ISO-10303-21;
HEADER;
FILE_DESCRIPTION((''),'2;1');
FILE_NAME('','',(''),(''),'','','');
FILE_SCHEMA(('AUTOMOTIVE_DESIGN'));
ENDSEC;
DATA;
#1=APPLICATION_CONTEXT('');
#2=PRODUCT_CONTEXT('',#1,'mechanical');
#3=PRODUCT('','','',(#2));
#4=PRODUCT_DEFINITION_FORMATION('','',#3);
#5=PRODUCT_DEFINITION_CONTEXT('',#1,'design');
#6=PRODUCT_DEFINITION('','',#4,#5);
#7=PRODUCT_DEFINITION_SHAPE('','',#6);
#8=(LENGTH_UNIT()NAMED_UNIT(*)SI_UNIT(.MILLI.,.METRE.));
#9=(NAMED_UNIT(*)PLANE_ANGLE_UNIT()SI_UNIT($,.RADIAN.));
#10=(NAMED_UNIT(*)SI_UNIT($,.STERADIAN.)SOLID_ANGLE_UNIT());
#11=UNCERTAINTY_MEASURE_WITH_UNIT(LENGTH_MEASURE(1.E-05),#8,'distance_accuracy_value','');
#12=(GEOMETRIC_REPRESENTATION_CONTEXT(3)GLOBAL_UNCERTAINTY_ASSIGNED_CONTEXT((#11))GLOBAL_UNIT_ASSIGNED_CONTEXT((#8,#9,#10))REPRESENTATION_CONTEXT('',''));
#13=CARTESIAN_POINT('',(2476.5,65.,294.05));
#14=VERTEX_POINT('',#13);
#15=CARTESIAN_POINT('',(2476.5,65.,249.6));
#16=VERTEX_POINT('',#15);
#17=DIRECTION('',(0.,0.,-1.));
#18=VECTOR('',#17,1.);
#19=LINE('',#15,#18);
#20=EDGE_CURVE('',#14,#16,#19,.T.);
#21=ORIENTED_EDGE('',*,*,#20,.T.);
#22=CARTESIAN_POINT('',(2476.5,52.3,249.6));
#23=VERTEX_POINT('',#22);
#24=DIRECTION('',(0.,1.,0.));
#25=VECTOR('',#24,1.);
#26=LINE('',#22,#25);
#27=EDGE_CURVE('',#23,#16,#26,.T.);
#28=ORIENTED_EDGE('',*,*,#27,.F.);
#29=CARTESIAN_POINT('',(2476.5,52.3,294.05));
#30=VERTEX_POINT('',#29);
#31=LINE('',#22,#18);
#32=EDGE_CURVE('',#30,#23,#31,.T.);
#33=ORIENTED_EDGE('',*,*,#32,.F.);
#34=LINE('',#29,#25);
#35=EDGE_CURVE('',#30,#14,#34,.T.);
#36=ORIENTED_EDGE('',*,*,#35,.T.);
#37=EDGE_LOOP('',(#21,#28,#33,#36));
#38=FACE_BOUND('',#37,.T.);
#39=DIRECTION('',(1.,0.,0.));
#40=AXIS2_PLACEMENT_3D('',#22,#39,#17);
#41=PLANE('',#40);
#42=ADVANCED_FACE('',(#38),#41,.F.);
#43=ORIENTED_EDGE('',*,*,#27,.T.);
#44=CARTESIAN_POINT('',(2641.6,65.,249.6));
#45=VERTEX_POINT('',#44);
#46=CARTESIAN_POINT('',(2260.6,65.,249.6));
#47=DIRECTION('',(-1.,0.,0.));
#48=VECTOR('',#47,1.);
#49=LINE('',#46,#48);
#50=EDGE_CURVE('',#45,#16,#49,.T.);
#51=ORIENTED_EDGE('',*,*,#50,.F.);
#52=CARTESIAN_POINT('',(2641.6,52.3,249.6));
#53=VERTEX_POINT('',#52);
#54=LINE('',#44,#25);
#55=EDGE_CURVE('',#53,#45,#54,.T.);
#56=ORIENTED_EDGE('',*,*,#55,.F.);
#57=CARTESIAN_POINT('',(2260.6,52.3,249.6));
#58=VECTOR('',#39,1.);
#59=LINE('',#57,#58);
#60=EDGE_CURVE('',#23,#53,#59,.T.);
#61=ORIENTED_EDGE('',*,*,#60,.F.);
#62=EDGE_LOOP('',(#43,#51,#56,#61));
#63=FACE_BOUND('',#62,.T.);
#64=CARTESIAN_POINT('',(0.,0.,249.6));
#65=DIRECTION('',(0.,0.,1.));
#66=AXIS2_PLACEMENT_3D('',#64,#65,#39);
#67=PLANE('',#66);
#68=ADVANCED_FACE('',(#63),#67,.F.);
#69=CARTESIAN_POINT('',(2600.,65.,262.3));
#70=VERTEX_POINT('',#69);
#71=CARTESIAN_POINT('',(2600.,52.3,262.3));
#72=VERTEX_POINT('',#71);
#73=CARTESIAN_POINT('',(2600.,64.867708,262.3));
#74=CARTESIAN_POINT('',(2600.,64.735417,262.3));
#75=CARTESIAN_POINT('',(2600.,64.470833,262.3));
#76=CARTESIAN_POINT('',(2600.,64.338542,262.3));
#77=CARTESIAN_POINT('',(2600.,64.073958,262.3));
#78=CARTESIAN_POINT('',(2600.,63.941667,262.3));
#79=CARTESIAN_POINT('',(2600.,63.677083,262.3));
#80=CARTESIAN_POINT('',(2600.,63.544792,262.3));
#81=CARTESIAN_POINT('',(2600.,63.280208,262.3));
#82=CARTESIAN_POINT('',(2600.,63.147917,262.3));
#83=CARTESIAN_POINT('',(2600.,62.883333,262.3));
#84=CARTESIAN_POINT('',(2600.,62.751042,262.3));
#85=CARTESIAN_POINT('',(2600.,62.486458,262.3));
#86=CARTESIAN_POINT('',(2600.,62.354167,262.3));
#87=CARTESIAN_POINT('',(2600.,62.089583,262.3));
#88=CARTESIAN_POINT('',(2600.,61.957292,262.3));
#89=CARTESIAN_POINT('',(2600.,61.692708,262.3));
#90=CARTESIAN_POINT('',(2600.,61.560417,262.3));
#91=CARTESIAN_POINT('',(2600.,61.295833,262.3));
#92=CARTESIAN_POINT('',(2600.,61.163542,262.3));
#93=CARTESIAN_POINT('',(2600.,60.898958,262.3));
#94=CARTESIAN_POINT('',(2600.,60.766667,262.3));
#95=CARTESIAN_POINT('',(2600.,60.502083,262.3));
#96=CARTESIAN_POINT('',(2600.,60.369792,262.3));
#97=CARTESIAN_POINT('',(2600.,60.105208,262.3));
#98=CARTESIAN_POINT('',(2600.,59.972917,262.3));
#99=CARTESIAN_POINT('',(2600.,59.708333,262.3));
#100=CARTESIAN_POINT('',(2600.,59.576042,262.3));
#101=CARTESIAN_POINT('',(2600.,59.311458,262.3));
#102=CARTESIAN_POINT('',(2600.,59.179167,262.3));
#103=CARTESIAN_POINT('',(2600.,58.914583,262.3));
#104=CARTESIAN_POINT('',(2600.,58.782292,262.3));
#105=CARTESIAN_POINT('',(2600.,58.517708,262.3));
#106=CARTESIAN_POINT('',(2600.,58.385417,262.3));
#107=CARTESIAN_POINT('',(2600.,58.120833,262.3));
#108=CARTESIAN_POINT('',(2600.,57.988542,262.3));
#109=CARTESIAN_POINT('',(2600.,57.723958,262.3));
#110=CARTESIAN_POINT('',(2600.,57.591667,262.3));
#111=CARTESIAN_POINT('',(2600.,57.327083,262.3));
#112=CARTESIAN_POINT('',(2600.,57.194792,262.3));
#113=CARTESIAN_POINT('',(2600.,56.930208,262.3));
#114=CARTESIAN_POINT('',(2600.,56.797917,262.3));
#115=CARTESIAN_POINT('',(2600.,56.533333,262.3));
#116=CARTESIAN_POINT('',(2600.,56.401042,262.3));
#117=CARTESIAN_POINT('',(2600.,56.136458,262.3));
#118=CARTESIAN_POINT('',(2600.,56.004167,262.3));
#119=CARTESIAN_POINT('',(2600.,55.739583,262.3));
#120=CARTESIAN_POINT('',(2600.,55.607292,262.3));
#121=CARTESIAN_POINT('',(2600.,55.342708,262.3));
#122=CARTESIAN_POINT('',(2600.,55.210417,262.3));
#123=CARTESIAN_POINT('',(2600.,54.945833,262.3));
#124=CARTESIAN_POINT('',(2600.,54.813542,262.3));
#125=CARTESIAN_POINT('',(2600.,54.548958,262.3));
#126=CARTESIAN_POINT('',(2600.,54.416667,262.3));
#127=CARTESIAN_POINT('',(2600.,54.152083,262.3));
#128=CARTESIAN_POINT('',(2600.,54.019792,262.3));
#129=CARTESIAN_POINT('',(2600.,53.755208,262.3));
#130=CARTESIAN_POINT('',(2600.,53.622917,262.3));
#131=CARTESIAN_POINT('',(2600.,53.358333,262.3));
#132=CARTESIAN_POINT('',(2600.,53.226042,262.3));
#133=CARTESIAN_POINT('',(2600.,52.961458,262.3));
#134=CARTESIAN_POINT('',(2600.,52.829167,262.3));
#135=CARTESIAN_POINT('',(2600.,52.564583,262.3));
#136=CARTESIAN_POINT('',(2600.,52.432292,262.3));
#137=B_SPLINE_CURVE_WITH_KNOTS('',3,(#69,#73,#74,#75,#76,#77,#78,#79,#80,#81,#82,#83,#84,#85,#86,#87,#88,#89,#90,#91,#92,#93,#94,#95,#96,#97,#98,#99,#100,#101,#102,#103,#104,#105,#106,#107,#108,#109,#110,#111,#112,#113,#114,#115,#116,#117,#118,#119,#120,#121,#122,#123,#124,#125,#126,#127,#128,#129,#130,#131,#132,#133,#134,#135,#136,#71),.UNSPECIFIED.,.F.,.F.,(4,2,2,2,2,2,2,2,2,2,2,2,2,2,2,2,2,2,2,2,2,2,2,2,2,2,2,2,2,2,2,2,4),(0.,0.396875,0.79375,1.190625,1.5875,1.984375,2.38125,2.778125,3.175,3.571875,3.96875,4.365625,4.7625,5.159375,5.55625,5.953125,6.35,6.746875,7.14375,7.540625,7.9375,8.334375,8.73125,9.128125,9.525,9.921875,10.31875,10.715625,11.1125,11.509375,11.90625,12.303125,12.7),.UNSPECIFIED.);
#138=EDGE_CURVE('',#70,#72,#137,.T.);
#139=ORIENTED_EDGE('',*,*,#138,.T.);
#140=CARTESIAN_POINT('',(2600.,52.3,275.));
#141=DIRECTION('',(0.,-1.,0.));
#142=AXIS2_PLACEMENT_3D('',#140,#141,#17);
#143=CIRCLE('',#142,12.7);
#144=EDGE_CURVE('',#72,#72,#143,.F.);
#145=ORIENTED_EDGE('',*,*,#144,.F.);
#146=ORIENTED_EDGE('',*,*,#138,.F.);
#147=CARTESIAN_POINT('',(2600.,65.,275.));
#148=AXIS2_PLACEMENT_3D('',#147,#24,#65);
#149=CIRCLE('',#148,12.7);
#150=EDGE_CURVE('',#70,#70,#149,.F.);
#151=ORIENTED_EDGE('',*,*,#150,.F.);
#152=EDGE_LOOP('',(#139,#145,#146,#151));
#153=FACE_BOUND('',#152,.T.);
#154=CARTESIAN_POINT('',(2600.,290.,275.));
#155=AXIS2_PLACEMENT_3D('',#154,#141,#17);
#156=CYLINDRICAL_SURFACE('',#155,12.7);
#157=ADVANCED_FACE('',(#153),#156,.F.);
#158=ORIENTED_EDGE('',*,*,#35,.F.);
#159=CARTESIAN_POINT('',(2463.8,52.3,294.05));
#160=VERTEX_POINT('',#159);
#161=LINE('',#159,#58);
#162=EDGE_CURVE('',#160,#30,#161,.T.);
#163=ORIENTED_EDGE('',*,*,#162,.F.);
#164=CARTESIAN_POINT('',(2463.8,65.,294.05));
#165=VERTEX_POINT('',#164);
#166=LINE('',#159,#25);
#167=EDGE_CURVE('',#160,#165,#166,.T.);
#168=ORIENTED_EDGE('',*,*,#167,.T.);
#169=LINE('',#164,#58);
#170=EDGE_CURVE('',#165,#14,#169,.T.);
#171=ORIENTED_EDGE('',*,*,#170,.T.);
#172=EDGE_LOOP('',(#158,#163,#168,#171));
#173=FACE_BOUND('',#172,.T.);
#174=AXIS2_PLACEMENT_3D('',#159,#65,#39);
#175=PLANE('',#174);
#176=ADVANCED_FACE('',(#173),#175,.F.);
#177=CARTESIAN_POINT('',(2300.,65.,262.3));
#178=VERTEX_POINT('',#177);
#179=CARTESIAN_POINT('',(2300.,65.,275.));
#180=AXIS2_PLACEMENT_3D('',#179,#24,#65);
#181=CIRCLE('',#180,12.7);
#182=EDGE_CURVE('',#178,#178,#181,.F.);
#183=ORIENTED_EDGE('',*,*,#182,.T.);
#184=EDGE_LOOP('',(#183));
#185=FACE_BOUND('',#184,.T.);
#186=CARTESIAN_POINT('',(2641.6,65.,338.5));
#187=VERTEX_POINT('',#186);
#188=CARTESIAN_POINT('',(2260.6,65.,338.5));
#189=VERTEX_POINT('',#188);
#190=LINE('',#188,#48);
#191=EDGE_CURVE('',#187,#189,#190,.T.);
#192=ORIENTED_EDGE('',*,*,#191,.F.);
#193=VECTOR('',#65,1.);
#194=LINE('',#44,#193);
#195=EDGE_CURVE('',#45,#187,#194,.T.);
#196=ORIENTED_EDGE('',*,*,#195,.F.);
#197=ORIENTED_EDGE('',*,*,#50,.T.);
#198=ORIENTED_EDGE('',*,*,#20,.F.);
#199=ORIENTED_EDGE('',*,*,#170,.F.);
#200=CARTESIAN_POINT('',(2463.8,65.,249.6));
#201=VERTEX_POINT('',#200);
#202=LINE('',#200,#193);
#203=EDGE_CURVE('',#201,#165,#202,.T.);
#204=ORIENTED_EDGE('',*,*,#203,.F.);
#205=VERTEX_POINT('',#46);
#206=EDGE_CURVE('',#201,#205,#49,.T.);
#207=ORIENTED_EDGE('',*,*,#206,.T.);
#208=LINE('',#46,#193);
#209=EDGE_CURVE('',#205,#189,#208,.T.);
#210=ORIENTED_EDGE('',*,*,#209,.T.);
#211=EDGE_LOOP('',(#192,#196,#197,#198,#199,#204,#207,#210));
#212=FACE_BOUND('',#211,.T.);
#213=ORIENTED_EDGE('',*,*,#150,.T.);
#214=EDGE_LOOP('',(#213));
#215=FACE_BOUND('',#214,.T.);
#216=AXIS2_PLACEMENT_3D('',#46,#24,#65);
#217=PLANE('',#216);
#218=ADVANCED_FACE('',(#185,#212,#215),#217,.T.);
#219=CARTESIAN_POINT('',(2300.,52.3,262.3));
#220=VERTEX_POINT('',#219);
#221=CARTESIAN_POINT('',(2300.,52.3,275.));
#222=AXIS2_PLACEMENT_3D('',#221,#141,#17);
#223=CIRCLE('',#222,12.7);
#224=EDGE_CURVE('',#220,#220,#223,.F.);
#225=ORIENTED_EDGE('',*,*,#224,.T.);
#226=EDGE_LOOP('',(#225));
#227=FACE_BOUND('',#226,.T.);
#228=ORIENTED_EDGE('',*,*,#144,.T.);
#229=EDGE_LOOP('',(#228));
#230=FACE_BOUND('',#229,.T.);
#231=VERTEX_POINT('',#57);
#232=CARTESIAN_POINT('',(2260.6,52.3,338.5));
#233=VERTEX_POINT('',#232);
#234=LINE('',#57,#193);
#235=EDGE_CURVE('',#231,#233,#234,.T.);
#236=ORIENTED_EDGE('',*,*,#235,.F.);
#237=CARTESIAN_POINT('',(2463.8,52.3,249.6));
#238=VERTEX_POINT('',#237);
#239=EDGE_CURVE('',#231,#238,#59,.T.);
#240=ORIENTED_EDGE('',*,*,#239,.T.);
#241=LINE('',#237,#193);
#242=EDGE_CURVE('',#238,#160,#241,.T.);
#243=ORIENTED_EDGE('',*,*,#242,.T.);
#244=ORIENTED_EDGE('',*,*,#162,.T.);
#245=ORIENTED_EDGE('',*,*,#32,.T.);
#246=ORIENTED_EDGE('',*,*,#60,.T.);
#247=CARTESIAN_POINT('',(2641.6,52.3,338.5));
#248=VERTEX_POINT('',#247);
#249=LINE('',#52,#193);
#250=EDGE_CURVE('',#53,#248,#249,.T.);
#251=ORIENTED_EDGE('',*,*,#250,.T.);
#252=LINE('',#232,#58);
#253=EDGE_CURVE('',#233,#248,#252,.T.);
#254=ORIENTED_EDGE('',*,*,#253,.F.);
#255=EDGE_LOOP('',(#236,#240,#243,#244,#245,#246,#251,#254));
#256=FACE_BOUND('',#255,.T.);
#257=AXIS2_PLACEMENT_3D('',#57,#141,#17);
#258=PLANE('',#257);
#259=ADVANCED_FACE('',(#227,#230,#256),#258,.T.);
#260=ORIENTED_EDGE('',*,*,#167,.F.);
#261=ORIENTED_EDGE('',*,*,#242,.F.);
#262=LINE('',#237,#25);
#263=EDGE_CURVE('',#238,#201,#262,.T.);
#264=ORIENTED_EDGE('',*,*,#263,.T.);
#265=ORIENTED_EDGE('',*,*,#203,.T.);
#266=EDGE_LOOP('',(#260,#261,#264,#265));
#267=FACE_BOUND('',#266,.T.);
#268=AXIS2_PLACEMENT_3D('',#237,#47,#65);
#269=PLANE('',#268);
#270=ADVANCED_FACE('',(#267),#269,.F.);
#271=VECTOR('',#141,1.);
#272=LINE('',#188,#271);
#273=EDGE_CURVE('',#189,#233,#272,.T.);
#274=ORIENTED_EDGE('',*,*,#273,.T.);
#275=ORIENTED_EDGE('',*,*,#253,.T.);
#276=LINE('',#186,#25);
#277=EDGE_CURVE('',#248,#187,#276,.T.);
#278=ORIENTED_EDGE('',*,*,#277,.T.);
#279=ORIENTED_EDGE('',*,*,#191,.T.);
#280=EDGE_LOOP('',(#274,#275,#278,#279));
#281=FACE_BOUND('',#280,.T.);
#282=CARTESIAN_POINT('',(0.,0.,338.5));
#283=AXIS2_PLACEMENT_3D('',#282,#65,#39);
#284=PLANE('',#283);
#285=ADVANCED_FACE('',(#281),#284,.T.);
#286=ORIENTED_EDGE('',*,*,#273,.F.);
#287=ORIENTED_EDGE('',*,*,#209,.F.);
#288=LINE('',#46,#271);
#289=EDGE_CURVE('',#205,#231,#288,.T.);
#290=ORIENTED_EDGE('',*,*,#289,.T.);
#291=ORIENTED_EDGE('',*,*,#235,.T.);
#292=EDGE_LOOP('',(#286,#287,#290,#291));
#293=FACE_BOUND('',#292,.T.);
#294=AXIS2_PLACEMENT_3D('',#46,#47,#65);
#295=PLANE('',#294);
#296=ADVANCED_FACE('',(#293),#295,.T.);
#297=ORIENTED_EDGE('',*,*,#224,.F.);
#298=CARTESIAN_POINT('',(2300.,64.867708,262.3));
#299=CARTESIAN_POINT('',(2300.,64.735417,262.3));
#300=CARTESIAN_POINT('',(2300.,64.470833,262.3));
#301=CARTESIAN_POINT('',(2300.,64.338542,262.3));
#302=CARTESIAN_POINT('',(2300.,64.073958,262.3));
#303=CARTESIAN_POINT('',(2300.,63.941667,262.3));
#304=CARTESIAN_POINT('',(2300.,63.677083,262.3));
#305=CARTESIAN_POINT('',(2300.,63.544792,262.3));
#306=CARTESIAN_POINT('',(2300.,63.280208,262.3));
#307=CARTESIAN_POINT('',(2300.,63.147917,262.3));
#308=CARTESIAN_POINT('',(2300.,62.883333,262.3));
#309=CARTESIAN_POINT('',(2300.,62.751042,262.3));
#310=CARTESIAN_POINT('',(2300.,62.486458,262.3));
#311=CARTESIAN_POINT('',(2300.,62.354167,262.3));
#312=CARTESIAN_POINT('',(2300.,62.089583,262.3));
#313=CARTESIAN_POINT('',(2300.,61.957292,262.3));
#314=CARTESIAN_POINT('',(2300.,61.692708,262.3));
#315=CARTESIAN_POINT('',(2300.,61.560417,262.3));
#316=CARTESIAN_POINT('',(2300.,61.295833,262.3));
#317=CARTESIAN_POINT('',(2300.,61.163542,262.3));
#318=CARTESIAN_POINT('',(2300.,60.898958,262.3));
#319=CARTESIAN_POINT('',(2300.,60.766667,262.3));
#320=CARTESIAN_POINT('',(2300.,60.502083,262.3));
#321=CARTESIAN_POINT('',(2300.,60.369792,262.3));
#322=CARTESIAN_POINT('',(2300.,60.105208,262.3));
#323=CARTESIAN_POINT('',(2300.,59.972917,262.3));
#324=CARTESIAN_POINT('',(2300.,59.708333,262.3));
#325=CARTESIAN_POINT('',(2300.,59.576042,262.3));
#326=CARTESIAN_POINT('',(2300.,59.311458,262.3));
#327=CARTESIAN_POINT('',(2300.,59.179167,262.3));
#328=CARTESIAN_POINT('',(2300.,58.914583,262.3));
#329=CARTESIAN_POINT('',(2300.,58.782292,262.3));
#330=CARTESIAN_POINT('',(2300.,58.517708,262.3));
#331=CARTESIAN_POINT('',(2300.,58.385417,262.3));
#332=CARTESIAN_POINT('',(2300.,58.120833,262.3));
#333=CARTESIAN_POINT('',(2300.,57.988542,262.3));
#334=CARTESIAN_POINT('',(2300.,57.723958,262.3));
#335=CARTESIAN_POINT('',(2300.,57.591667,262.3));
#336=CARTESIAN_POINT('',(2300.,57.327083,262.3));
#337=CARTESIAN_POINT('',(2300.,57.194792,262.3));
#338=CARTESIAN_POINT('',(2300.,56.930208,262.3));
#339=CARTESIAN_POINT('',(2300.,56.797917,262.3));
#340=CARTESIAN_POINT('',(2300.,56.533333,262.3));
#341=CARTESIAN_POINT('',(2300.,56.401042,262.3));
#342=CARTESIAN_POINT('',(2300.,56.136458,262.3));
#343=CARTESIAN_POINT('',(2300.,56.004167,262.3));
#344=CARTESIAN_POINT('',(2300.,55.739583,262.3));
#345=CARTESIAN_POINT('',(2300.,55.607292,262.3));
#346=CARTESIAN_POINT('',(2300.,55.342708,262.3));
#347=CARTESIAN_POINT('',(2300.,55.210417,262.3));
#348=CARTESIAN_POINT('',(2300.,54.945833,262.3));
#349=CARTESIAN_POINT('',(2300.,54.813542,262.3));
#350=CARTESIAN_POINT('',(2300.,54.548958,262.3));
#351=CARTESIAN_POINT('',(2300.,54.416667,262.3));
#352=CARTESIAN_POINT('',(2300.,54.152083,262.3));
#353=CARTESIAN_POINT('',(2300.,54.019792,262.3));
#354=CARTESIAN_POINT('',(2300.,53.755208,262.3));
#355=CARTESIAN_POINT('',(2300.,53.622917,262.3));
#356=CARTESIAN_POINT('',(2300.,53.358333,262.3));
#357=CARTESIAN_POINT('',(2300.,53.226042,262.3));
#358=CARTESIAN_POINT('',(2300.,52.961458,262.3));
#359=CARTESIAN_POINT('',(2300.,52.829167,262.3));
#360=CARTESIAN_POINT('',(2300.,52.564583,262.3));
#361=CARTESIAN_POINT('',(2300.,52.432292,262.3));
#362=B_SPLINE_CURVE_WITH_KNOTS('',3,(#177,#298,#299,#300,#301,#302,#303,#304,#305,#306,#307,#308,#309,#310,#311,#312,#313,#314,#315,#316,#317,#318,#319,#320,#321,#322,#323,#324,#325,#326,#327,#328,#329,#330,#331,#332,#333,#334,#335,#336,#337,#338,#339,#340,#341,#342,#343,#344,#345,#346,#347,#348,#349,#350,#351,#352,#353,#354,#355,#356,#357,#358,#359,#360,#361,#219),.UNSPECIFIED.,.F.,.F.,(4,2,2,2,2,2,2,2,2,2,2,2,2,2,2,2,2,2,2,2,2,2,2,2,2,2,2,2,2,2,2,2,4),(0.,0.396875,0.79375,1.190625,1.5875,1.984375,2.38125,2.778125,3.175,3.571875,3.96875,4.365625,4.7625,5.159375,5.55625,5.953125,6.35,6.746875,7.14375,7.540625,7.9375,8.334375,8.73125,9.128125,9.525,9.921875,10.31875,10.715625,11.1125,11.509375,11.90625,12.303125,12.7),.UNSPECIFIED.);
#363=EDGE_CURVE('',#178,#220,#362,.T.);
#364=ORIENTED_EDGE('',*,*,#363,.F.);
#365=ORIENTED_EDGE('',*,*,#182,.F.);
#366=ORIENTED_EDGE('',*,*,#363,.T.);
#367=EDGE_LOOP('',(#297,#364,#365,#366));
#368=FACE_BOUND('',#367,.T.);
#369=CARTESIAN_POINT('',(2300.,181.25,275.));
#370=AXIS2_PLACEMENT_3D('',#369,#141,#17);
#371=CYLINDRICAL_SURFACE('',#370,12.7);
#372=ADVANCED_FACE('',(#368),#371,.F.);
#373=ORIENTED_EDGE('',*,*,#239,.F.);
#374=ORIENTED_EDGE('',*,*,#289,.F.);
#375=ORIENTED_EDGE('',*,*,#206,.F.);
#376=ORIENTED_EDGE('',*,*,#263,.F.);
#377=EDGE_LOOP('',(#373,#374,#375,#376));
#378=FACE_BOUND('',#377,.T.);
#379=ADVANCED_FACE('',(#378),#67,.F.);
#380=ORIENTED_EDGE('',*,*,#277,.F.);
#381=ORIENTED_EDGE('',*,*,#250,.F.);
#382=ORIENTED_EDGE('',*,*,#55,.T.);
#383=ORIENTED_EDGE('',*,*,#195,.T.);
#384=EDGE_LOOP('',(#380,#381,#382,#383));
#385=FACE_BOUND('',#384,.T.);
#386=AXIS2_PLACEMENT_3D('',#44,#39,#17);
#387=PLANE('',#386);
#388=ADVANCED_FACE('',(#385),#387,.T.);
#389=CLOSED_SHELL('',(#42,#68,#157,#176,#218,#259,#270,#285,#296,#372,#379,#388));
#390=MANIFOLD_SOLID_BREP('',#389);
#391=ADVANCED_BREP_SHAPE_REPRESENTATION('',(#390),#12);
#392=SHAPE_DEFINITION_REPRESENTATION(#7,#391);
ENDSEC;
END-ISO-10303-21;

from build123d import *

# Parameters (mm, degrees)
BOSS_EXTRUDE1_DEPTH      = 50.8
BOSS_EXTRUDE1_DEPTH_BACK = 38.1
SKETCH1_W                = 381
SKETCH1_H                = 12.7
SKETCH3_W                = 12.7
SKETCH3_H                = 44.45
CUT_EXTRUDE1_DEPTH       = 2664.230012597
CAVITY1_START            = 52.3
CAVITY1_OUTLINE_R        = 12.7
CAVITY1_DEPTH            = 12.7


# Read off the part's stored shape, not the designer's step: Cavity1
with BuildPart() as part:
    # Sketch1 → Boss-Extrude1 (new, two sides: drawn at the far end of the back side and taken through both)
    with BuildSketch(Plane.XY.offset(287.7).offset(-BOSS_EXTRUDE1_DEPTH_BACK)):
        with Locations((2451.1, 58.65)):
            Rectangle(SKETCH1_W, SKETCH1_H)
    extrude(amount=BOSS_EXTRUDE1_DEPTH + BOSS_EXTRUDE1_DEPTH_BACK)

    # Sketch3 → Cut-Extrude1 (cut, through all)
    with BuildSketch(Plane(origin=(0, 65, 0), x_dir=(1, 0, 0), z_dir=(0, 1, 0))):
        with Locations((2470.15, -271.825)):
            Rectangle(SKETCH3_W, SKETCH3_H)
    extrude(amount=-CUT_EXTRUDE1_DEPTH, mode=Mode.SUBTRACT)

    # Cavity1 outline → Cavity1 (cut)
    with BuildSketch(Plane(origin=(0, 0, 0), x_dir=(1, 0, 0), z_dir=(0, 1, 0)).offset(CAVITY1_START)):
        with Locations((2300, -275)):
            Circle(CAVITY1_OUTLINE_R)
        with Locations((2600, -275)):
            Circle(CAVITY1_OUTLINE_R)
    extrude(amount=CAVITY1_DEPTH, mode=Mode.SUBTRACT)


solid = part.part
